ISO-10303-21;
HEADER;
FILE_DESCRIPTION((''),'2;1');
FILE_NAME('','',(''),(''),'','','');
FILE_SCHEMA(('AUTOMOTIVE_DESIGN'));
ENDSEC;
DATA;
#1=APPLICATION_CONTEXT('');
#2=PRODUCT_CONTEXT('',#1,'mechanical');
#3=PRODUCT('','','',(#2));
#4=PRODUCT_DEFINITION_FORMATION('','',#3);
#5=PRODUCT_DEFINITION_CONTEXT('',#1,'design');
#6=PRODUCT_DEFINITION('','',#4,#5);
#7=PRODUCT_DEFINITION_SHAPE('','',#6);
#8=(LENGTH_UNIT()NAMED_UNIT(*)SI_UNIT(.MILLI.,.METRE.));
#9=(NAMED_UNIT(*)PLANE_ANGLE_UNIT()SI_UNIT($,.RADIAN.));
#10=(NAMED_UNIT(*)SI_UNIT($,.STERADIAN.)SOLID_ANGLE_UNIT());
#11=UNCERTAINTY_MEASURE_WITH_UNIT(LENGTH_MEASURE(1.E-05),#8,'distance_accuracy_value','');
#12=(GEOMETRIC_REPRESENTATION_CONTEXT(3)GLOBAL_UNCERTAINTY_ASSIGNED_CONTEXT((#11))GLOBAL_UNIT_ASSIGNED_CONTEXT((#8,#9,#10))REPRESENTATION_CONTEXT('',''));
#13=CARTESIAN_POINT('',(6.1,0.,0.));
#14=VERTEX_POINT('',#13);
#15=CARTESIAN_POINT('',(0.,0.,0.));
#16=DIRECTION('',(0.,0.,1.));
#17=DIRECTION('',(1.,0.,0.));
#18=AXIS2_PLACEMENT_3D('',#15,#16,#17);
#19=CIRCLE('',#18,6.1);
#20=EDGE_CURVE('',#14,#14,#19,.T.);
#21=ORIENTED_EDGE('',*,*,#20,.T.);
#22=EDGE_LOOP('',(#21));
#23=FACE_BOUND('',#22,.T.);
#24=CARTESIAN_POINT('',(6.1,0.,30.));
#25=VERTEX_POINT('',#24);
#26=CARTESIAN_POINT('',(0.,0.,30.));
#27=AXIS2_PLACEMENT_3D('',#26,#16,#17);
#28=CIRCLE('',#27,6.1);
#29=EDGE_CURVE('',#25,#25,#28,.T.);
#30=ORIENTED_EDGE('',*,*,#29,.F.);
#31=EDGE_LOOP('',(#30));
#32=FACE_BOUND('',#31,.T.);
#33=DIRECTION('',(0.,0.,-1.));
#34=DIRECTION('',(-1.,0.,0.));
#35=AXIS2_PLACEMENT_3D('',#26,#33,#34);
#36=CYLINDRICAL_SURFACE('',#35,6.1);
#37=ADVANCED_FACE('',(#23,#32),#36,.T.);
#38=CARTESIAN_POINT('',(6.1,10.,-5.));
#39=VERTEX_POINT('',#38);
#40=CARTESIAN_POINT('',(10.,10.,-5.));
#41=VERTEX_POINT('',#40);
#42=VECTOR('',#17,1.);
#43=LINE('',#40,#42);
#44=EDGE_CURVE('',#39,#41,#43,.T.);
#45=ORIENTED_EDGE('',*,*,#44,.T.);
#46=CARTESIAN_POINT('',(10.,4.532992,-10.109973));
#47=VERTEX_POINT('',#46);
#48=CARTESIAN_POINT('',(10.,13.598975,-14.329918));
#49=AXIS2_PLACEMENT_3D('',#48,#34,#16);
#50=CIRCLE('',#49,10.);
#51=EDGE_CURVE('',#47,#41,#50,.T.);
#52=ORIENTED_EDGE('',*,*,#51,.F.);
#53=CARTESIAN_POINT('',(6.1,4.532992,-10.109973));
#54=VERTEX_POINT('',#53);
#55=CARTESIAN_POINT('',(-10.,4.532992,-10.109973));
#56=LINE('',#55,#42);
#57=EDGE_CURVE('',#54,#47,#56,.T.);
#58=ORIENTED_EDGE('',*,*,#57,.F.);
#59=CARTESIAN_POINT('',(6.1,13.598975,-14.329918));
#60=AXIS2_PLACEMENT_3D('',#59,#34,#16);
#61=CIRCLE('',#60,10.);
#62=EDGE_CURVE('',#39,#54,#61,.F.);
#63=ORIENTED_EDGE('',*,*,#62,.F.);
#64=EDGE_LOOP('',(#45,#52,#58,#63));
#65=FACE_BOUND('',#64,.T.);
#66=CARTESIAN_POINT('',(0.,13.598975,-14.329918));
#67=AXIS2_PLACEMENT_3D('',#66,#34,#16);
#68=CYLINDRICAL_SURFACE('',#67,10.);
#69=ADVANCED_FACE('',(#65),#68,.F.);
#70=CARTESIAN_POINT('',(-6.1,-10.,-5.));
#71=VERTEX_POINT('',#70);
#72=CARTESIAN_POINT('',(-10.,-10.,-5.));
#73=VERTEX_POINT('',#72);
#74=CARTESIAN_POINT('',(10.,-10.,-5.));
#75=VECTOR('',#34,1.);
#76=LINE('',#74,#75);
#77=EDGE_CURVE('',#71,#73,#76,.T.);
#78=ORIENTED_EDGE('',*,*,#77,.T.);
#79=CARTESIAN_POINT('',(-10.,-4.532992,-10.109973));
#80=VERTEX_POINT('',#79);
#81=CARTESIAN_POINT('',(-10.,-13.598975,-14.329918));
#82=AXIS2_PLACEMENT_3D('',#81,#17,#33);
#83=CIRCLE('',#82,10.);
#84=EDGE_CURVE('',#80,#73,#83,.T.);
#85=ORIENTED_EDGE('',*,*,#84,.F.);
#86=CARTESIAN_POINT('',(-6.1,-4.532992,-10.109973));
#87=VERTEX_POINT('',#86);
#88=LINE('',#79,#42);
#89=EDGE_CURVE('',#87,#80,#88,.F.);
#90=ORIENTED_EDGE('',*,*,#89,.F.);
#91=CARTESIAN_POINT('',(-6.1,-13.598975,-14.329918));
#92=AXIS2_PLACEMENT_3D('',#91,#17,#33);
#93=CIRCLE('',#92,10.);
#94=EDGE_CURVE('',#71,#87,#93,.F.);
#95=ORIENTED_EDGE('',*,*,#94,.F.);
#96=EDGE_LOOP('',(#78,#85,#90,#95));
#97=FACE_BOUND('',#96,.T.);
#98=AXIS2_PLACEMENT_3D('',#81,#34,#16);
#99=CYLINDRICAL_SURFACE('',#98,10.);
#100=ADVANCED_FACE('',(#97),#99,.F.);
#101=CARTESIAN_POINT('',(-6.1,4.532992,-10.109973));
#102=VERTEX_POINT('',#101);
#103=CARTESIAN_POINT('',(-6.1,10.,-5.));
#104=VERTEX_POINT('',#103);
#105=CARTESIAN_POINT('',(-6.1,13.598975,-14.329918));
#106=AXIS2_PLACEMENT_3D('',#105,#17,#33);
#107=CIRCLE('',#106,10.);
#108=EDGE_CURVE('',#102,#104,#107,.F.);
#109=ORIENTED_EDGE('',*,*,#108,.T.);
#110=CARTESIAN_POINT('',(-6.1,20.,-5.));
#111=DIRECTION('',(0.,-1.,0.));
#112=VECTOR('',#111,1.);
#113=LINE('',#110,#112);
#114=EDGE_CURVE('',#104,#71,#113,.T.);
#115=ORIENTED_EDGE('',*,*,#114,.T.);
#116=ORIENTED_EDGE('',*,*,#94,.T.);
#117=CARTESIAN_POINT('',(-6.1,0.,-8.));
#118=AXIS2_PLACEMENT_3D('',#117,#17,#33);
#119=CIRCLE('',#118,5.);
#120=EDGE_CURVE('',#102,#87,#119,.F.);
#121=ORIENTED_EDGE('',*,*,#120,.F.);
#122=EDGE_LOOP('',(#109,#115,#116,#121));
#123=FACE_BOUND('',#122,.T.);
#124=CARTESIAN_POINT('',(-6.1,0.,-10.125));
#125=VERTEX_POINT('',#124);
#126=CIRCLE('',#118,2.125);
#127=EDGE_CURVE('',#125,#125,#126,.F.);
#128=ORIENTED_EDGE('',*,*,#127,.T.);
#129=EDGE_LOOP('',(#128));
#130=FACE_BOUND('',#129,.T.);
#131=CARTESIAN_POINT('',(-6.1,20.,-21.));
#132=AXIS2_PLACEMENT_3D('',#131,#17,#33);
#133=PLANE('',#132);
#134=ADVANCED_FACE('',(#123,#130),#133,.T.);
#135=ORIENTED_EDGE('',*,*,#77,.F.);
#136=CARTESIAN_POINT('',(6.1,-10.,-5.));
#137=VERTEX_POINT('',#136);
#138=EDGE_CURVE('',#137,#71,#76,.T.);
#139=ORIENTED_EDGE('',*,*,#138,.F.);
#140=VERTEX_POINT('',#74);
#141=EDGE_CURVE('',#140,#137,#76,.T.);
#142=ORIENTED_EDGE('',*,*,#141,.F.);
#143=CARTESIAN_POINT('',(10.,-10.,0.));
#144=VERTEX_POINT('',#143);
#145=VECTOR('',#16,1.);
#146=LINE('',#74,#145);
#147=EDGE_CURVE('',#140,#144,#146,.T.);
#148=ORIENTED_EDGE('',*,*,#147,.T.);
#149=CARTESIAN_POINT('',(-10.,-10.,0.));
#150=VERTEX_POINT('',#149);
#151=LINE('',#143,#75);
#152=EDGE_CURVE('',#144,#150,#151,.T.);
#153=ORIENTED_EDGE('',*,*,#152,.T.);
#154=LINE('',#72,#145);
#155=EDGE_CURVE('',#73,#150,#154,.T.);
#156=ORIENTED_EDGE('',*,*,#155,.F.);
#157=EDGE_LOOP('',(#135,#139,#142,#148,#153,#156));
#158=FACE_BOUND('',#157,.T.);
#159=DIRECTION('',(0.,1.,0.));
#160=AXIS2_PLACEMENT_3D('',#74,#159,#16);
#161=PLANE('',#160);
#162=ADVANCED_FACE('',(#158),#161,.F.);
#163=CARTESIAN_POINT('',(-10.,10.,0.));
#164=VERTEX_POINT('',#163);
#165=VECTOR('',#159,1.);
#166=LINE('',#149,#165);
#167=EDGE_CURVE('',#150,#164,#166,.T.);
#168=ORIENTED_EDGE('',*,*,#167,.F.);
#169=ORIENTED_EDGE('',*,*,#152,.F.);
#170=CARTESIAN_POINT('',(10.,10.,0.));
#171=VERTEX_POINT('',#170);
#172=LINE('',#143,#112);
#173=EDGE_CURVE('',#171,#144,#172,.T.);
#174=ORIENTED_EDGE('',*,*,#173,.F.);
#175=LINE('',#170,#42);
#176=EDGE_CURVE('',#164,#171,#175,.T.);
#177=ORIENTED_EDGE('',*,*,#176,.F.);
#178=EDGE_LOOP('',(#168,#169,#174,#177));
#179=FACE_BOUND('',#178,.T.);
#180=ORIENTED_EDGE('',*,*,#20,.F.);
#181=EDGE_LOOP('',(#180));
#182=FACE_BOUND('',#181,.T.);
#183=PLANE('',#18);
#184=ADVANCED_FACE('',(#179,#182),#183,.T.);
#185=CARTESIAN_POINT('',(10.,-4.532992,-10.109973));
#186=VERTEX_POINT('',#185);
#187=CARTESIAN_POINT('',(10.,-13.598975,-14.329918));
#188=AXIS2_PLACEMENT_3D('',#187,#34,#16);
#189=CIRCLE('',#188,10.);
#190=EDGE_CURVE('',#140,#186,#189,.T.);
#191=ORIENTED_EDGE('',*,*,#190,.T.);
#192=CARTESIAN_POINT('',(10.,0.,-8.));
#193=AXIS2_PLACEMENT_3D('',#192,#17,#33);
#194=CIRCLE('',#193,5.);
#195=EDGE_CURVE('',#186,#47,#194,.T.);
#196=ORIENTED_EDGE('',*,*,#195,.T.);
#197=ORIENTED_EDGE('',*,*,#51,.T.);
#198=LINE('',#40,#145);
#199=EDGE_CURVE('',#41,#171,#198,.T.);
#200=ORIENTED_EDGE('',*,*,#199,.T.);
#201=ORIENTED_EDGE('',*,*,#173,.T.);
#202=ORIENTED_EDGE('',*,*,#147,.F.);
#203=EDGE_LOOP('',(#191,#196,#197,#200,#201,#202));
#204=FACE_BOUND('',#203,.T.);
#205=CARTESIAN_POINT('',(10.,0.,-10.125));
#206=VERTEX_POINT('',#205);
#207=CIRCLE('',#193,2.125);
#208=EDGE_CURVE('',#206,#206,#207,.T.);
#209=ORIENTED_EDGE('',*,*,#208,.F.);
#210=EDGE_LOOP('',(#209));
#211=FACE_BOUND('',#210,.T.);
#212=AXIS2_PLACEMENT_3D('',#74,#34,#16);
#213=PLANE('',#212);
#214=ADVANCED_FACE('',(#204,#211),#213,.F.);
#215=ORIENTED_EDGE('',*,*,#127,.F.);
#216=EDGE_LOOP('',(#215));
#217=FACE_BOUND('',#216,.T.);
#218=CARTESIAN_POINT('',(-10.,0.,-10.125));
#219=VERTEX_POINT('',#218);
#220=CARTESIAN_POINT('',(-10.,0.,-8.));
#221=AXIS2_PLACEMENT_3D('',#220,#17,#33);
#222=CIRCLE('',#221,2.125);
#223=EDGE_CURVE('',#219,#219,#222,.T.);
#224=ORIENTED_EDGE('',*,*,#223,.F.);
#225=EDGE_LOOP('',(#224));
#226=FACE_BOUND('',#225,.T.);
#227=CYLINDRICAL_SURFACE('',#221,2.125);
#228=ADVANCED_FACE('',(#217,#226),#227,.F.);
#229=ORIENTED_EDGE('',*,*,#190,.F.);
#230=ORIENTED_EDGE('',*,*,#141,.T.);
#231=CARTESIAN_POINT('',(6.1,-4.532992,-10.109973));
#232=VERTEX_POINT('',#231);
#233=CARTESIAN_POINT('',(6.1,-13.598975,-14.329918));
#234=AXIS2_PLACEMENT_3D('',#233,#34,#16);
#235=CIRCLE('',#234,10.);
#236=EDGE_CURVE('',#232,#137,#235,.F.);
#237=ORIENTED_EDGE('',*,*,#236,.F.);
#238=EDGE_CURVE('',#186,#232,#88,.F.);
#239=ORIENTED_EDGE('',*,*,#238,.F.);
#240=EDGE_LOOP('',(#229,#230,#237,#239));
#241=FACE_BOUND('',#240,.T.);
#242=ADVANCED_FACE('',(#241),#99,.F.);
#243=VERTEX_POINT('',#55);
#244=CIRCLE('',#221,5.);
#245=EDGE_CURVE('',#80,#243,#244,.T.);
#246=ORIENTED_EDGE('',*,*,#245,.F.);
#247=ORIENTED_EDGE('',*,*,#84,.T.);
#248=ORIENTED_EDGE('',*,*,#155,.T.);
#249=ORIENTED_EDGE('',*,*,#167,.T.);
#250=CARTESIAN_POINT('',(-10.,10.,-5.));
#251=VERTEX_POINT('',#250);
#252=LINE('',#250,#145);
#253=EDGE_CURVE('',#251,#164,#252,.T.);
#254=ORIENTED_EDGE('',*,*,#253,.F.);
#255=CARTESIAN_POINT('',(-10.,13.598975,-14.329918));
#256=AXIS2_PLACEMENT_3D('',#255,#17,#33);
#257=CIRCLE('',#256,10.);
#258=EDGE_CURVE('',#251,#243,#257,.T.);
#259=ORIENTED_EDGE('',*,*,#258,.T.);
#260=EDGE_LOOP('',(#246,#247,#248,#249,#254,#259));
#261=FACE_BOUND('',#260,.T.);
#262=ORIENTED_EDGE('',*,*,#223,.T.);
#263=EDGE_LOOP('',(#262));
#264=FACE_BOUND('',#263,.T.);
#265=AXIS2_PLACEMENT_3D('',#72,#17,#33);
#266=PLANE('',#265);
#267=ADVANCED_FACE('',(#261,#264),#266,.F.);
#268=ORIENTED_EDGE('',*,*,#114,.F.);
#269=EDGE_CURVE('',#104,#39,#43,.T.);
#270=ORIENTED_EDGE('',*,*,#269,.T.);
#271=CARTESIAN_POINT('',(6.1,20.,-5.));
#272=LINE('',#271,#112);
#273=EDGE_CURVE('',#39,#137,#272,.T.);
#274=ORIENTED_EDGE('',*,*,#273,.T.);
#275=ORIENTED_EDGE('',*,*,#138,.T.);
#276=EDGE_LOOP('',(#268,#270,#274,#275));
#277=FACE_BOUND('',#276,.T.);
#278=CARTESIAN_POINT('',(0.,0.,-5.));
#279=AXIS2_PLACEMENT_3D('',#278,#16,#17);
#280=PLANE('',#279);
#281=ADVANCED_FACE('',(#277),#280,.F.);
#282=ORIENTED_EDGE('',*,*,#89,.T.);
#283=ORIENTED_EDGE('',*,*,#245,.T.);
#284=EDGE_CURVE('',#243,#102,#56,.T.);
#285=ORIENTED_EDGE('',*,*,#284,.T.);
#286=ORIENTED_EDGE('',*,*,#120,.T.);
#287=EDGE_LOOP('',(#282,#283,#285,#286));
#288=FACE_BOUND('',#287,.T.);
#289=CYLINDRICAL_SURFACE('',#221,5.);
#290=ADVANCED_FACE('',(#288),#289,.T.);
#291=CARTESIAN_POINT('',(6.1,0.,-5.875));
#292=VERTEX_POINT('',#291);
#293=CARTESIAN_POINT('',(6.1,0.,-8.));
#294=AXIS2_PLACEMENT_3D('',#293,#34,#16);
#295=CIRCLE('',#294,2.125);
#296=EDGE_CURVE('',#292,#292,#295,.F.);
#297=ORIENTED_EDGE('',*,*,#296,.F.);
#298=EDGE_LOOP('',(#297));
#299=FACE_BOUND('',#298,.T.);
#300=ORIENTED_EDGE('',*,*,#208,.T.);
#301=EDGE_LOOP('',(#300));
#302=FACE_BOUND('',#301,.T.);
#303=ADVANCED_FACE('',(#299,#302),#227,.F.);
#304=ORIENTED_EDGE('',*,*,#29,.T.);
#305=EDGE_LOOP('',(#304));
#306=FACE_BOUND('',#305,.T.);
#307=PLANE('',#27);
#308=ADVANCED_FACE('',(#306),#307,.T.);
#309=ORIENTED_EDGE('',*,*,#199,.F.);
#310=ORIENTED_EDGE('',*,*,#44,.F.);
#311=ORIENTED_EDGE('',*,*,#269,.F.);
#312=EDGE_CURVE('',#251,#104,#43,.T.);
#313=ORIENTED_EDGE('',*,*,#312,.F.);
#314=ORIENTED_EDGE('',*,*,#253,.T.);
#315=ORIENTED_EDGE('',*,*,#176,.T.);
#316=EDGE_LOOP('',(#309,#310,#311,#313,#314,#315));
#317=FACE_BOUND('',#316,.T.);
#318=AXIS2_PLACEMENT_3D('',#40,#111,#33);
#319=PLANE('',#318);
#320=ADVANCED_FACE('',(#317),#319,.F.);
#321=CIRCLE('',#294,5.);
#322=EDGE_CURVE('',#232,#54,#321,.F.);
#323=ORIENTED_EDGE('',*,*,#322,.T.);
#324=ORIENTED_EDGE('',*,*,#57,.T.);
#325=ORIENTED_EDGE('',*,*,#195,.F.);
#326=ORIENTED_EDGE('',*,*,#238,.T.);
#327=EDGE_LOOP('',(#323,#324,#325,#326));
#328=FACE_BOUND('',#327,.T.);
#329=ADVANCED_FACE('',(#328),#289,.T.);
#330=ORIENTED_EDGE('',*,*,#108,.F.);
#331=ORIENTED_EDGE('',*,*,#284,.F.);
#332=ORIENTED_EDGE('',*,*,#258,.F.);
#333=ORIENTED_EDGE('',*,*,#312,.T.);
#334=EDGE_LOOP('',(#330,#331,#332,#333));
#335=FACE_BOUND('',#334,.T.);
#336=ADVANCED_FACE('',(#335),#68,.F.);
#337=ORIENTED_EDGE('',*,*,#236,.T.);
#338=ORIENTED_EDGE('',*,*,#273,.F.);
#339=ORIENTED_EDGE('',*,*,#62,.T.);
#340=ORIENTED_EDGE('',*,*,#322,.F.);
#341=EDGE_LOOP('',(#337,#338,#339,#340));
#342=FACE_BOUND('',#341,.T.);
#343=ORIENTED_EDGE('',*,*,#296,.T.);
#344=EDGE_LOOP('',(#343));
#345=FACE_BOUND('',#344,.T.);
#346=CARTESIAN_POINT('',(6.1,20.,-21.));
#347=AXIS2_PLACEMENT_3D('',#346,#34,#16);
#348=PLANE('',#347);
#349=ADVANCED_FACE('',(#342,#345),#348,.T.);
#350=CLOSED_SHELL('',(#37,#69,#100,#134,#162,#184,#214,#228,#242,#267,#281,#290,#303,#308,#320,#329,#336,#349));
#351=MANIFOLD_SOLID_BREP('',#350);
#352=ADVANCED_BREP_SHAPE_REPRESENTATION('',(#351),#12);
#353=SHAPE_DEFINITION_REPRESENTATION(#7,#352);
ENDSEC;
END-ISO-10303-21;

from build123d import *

# Parameters (mm, degrees)
SKETCH2_R               = 6.1
BOSS_EXTRUDE1_DEPTH     = 30
SKETCH3_W               = 20
SKETCH3_H               = 20
BOSS_EXTRUDE2_DEPTH     = 5
SKETCH4_R               = 2.125
BOSS_EXTRUDE3_DEPTH     = 20
CUT_EXTRUDE1_DEPTH      = 20
CUT_EXTRUDE1_DEPTH_BACK = 20
SKETCH5_W               = 12.2
SKETCH5_H               = 16
FILLET2_R               = 10


with BuildPart() as part:
    # Sketch2 → Boss-Extrude1 (new body)
    with BuildSketch(Plane.XY):
        Circle(SKETCH2_R)
    extrude(amount=BOSS_EXTRUDE1_DEPTH)

    # Sketch3 → Boss-Extrude2 (add)
    with BuildSketch(Plane(origin=(0, 0, 0), x_dir=(-1, 0, 0), z_dir=(0, 0, -1))):
        Rectangle(SKETCH3_W, SKETCH3_H)
    extrude(amount=BOSS_EXTRUDE2_DEPTH)

    # Sketch4 → Boss-Extrude3 (add)
    with BuildSketch(Plane(origin=(10, 0, 0), x_dir=(0, 0, -1), z_dir=(1, 0, 0))):
        with BuildLine():
            Line((5, 0), (5, 5))
            Line((5, 5), (8, 5))
            ThreePointArc((8, 5), (13, 0), (8, -5))
            Line((8, -5), (5, -5))
            Line((5, -5), (5, 0))
        make_face()
        with Locations((8, 0)):
            Circle(SKETCH4_R, mode=Mode.SUBTRACT)
    extrude(amount=-BOSS_EXTRUDE3_DEPTH)

    # Sketch5 → Cut-Extrude1 (cut, two sides: drawn at the far end of the back side and taken through both)
    with BuildSketch(Plane(origin=(0, 0, 0), x_dir=(1, 0, 0), z_dir=(0, 1, 0)).offset(-CUT_EXTRUDE1_DEPTH_BACK)):
        with Locations((0, 13)):
            Rectangle(SKETCH5_W, SKETCH5_H)
    extrude(amount=CUT_EXTRUDE1_DEPTH + CUT_EXTRUDE1_DEPTH_BACK, mode=Mode.SUBTRACT)

    # Fillet2
    # the kernel refuses this fillet: 10 mm, written as the material it adds along each edge
    with BuildSketch(Plane(origin=(6.728171707, 5, -5), x_dir=(0, -0.09101222312672333, -0.9958497754388116), z_dir=(-1, 0, 0))) as fillet2_piece_1_section:
        with BuildLine():
            CenterArc((8.508585165, -9.412424416), FILLET2_R, 109.738733942, 43.945519562)
            Line((-0.455061116, -4.979248877), (-1.351425744, -4.535931323))
            ThreePointArc((-1.351425744, -4.535931323), (-1.223380333, -2.398612215), (-0.995849775, 0.091012223))
            Line((-0.995849775, 0.091012223), (0.091012223, 0.995849775))
            ThreePointArc((0.091012223, 0.995849775), (3.078561549, 0.722813106), (4.793537035, 0.941242442))
            Line((4.793537035, 0.941242442), (5.131268683, 0))
        make_face()
    fillet2_piece_1 = extrude(amount=16.728171707, mode=Mode.PRIVATE)
    fillet2_piece_1 = split(fillet2_piece_1, bisect_by=Plane(origin=(6.1, 6.116270273, -6.110221206), z_dir=(1, 0, 0)), keep=Keep.TOP, mode=Mode.PRIVATE)
    add(fillet2_piece_1)
    with BuildSketch(Plane(origin=(-6.1, 5, -5), x_dir=(0, -0.09101222312672332, -0.9958497754388116), z_dir=(-1, 0, 0))) as fillet2_piece_2:
        with BuildLine():
            CenterArc((8.508585165, -9.412424416), FILLET2_R, 109.738733942, 43.945519562)
            Line((-0.455061116, -4.979248877), (-1.351425744, -4.535931323))
            ThreePointArc((-1.351425744, -4.535931323), (-1.223380333, -2.398612215), (-0.995849775, 0.091012223))
            Line((-0.995849775, 0.091012223), (0.091012223, 0.995849775))
            ThreePointArc((0.091012223, 0.995849775), (3.078561549, 0.722813106), (4.793537035, 0.941242442))
            Line((4.793537035, 0.941242442), (5.131268683, 0))
        make_face()
    extrude(amount=3.9)
    with BuildSketch(Plane(origin=(10, 5, -5), x_dir=(0, 1, 0), z_dir=(-1, 0, 0))) as fillet2_piece_3:
        with BuildLine():
            CenterArc((8.598975489, 9.329918297), FILLET2_R, 204.960576151, 43.945519562)
            Line((-0.46700817, 5.109972766), (-1.373606536, 4.687978213))
            ThreePointArc((-1.373606536, 4.687978213), (-1, 3), (-1, 0))
            Line((-1, 0), (0, -1))
            ThreePointArc((0, -1), (2.5, -1), (4.640102451, -0.93299183))
            Line((4.640102451, -0.93299183), (5, 0))
        make_face()
    extrude(amount=3.9)
    with BuildSketch(Plane(origin=(10, 5, -5), x_dir=(0, 1, 0), z_dir=(-1, 0, 0))) as fillet2_piece_4_section:
        with BuildLine():
            CenterArc((8.598975489, 9.329918297), FILLET2_R, 204.960576151, 43.945519562)
            Line((-0.46700817, 5.109972766), (-1.373606536, 4.687978213))
            ThreePointArc((-1.373606536, 4.687978213), (-1, 3), (-1, 0))
            Line((-1, 0), (0, -1))
            ThreePointArc((0, -1), (2.5, -1), (4.640102451, -0.93299183))
            Line((4.640102451, -0.93299183), (5, 0))
        make_face()
    fillet2_piece_4 = extrude(amount=16.728171707, mode=Mode.PRIVATE)
    fillet2_piece_4 = split(fillet2_piece_4, bisect_by=Plane(origin=(-6.1, 6.116270273, -6.110221206), z_dir=(-1, 0, 0)), keep=Keep.TOP, mode=Mode.PRIVATE)
    add(fillet2_piece_4)
    with BuildSketch(Plane(origin=(6.728171707, -5, -5), x_dir=(0, 0.0910122231267235, -0.9958497754388116), z_dir=(-1, 0, 0))) as fillet2_piece_5_section:
        with BuildLine():
            CenterArc((8.508585165, 9.412424416), FILLET2_R, 206.315746496, 43.945519562)
            Line((-0.455061116, 4.979248877), (-1.351425744, 4.535931323))
            ThreePointArc((-1.351425744, 4.535931323), (-1.223380333, 2.398612215), (-0.995849775, -0.091012223))
            Line((-0.995849775, -0.091012223), (0.091012223, -0.995849775))
            ThreePointArc((0.091012223, -0.995849775), (3.078561549, -0.722813106), (4.793537035, -0.941242442))
            Line((4.793537035, -0.941242442), (5.131268683, 0))
        make_face()
    fillet2_piece_5 = extrude(amount=16.728171707, mode=Mode.PRIVATE)
    fillet2_piece_5 = split(fillet2_piece_5, bisect_by=Plane(origin=(6.1, -6.116270273, -6.110221206), z_dir=(1, 0, 0)), keep=Keep.TOP, mode=Mode.PRIVATE)
    add(fillet2_piece_5)
    with BuildSketch(Plane(origin=(-6.1, -5, -5), x_dir=(0, 0.0910122231267235, -0.9958497754388116), z_dir=(-1, 0, 0))) as fillet2_piece_6:
        with BuildLine():
            CenterArc((8.508585165, 9.412424416), FILLET2_R, 206.315746496, 43.945519562)
            Line((-0.455061116, 4.979248877), (-1.351425744, 4.535931323))
            ThreePointArc((-1.351425744, 4.535931323), (-1.223380333, 2.398612215), (-0.995849775, -0.091012223))
            Line((-0.995849775, -0.091012223), (0.091012223, -0.995849775))
            ThreePointArc((0.091012223, -0.995849775), (3.078561549, -0.722813106), (4.793537035, -0.941242442))
            Line((4.793537035, -0.941242442), (5.131268683, 0))
        make_face()
    extrude(amount=3.9)
    with BuildSketch(Plane(origin=(10, -5, -5), x_dir=(0, -1, 0), z_dir=(-1, 0, 0))) as fillet2_piece_7:
        with BuildLine():
            CenterArc((8.598975489, -9.329918297), FILLET2_R, 111.093904287, 43.945519562)
            Line((-0.46700817, -5.109972766), (-1.373606536, -4.687978213))
            ThreePointArc((-1.373606536, -4.687978213), (-1, -3), (-1, 0))
            Line((-1, 0), (0, 1))
            ThreePointArc((0, 1), (2.5, 1), (4.640102451, 0.93299183))
            Line((4.640102451, 0.93299183), (5, 0))
        make_face()
    extrude(amount=3.9)
    with BuildSketch(Plane(origin=(10, -5, -5), x_dir=(0, -1, 0), z_dir=(-1, 0, 0))) as fillet2_piece_8_section:
        with BuildLine():
            CenterArc((8.598975489, -9.329918297), FILLET2_R, 111.093904287, 43.945519562)
            Line((-0.46700817, -5.109972766), (-1.373606536, -4.687978213))
            ThreePointArc((-1.373606536, -4.687978213), (-1, -3), (-1, 0))
            Line((-1, 0), (0, 1))
            ThreePointArc((0, 1), (2.5, 1), (4.640102451, 0.93299183))
            Line((4.640102451, 0.93299183), (5, 0))
        make_face()
    fillet2_piece_8 = extrude(amount=16.728171707, mode=Mode.PRIVATE)
    fillet2_piece_8 = split(fillet2_piece_8, bisect_by=Plane(origin=(-6.1, -6.116270273, -6.110221206), z_dir=(-1, 0, 0)), keep=Keep.TOP, mode=Mode.PRIVATE)
    add(fillet2_piece_8)


solid = part.part
